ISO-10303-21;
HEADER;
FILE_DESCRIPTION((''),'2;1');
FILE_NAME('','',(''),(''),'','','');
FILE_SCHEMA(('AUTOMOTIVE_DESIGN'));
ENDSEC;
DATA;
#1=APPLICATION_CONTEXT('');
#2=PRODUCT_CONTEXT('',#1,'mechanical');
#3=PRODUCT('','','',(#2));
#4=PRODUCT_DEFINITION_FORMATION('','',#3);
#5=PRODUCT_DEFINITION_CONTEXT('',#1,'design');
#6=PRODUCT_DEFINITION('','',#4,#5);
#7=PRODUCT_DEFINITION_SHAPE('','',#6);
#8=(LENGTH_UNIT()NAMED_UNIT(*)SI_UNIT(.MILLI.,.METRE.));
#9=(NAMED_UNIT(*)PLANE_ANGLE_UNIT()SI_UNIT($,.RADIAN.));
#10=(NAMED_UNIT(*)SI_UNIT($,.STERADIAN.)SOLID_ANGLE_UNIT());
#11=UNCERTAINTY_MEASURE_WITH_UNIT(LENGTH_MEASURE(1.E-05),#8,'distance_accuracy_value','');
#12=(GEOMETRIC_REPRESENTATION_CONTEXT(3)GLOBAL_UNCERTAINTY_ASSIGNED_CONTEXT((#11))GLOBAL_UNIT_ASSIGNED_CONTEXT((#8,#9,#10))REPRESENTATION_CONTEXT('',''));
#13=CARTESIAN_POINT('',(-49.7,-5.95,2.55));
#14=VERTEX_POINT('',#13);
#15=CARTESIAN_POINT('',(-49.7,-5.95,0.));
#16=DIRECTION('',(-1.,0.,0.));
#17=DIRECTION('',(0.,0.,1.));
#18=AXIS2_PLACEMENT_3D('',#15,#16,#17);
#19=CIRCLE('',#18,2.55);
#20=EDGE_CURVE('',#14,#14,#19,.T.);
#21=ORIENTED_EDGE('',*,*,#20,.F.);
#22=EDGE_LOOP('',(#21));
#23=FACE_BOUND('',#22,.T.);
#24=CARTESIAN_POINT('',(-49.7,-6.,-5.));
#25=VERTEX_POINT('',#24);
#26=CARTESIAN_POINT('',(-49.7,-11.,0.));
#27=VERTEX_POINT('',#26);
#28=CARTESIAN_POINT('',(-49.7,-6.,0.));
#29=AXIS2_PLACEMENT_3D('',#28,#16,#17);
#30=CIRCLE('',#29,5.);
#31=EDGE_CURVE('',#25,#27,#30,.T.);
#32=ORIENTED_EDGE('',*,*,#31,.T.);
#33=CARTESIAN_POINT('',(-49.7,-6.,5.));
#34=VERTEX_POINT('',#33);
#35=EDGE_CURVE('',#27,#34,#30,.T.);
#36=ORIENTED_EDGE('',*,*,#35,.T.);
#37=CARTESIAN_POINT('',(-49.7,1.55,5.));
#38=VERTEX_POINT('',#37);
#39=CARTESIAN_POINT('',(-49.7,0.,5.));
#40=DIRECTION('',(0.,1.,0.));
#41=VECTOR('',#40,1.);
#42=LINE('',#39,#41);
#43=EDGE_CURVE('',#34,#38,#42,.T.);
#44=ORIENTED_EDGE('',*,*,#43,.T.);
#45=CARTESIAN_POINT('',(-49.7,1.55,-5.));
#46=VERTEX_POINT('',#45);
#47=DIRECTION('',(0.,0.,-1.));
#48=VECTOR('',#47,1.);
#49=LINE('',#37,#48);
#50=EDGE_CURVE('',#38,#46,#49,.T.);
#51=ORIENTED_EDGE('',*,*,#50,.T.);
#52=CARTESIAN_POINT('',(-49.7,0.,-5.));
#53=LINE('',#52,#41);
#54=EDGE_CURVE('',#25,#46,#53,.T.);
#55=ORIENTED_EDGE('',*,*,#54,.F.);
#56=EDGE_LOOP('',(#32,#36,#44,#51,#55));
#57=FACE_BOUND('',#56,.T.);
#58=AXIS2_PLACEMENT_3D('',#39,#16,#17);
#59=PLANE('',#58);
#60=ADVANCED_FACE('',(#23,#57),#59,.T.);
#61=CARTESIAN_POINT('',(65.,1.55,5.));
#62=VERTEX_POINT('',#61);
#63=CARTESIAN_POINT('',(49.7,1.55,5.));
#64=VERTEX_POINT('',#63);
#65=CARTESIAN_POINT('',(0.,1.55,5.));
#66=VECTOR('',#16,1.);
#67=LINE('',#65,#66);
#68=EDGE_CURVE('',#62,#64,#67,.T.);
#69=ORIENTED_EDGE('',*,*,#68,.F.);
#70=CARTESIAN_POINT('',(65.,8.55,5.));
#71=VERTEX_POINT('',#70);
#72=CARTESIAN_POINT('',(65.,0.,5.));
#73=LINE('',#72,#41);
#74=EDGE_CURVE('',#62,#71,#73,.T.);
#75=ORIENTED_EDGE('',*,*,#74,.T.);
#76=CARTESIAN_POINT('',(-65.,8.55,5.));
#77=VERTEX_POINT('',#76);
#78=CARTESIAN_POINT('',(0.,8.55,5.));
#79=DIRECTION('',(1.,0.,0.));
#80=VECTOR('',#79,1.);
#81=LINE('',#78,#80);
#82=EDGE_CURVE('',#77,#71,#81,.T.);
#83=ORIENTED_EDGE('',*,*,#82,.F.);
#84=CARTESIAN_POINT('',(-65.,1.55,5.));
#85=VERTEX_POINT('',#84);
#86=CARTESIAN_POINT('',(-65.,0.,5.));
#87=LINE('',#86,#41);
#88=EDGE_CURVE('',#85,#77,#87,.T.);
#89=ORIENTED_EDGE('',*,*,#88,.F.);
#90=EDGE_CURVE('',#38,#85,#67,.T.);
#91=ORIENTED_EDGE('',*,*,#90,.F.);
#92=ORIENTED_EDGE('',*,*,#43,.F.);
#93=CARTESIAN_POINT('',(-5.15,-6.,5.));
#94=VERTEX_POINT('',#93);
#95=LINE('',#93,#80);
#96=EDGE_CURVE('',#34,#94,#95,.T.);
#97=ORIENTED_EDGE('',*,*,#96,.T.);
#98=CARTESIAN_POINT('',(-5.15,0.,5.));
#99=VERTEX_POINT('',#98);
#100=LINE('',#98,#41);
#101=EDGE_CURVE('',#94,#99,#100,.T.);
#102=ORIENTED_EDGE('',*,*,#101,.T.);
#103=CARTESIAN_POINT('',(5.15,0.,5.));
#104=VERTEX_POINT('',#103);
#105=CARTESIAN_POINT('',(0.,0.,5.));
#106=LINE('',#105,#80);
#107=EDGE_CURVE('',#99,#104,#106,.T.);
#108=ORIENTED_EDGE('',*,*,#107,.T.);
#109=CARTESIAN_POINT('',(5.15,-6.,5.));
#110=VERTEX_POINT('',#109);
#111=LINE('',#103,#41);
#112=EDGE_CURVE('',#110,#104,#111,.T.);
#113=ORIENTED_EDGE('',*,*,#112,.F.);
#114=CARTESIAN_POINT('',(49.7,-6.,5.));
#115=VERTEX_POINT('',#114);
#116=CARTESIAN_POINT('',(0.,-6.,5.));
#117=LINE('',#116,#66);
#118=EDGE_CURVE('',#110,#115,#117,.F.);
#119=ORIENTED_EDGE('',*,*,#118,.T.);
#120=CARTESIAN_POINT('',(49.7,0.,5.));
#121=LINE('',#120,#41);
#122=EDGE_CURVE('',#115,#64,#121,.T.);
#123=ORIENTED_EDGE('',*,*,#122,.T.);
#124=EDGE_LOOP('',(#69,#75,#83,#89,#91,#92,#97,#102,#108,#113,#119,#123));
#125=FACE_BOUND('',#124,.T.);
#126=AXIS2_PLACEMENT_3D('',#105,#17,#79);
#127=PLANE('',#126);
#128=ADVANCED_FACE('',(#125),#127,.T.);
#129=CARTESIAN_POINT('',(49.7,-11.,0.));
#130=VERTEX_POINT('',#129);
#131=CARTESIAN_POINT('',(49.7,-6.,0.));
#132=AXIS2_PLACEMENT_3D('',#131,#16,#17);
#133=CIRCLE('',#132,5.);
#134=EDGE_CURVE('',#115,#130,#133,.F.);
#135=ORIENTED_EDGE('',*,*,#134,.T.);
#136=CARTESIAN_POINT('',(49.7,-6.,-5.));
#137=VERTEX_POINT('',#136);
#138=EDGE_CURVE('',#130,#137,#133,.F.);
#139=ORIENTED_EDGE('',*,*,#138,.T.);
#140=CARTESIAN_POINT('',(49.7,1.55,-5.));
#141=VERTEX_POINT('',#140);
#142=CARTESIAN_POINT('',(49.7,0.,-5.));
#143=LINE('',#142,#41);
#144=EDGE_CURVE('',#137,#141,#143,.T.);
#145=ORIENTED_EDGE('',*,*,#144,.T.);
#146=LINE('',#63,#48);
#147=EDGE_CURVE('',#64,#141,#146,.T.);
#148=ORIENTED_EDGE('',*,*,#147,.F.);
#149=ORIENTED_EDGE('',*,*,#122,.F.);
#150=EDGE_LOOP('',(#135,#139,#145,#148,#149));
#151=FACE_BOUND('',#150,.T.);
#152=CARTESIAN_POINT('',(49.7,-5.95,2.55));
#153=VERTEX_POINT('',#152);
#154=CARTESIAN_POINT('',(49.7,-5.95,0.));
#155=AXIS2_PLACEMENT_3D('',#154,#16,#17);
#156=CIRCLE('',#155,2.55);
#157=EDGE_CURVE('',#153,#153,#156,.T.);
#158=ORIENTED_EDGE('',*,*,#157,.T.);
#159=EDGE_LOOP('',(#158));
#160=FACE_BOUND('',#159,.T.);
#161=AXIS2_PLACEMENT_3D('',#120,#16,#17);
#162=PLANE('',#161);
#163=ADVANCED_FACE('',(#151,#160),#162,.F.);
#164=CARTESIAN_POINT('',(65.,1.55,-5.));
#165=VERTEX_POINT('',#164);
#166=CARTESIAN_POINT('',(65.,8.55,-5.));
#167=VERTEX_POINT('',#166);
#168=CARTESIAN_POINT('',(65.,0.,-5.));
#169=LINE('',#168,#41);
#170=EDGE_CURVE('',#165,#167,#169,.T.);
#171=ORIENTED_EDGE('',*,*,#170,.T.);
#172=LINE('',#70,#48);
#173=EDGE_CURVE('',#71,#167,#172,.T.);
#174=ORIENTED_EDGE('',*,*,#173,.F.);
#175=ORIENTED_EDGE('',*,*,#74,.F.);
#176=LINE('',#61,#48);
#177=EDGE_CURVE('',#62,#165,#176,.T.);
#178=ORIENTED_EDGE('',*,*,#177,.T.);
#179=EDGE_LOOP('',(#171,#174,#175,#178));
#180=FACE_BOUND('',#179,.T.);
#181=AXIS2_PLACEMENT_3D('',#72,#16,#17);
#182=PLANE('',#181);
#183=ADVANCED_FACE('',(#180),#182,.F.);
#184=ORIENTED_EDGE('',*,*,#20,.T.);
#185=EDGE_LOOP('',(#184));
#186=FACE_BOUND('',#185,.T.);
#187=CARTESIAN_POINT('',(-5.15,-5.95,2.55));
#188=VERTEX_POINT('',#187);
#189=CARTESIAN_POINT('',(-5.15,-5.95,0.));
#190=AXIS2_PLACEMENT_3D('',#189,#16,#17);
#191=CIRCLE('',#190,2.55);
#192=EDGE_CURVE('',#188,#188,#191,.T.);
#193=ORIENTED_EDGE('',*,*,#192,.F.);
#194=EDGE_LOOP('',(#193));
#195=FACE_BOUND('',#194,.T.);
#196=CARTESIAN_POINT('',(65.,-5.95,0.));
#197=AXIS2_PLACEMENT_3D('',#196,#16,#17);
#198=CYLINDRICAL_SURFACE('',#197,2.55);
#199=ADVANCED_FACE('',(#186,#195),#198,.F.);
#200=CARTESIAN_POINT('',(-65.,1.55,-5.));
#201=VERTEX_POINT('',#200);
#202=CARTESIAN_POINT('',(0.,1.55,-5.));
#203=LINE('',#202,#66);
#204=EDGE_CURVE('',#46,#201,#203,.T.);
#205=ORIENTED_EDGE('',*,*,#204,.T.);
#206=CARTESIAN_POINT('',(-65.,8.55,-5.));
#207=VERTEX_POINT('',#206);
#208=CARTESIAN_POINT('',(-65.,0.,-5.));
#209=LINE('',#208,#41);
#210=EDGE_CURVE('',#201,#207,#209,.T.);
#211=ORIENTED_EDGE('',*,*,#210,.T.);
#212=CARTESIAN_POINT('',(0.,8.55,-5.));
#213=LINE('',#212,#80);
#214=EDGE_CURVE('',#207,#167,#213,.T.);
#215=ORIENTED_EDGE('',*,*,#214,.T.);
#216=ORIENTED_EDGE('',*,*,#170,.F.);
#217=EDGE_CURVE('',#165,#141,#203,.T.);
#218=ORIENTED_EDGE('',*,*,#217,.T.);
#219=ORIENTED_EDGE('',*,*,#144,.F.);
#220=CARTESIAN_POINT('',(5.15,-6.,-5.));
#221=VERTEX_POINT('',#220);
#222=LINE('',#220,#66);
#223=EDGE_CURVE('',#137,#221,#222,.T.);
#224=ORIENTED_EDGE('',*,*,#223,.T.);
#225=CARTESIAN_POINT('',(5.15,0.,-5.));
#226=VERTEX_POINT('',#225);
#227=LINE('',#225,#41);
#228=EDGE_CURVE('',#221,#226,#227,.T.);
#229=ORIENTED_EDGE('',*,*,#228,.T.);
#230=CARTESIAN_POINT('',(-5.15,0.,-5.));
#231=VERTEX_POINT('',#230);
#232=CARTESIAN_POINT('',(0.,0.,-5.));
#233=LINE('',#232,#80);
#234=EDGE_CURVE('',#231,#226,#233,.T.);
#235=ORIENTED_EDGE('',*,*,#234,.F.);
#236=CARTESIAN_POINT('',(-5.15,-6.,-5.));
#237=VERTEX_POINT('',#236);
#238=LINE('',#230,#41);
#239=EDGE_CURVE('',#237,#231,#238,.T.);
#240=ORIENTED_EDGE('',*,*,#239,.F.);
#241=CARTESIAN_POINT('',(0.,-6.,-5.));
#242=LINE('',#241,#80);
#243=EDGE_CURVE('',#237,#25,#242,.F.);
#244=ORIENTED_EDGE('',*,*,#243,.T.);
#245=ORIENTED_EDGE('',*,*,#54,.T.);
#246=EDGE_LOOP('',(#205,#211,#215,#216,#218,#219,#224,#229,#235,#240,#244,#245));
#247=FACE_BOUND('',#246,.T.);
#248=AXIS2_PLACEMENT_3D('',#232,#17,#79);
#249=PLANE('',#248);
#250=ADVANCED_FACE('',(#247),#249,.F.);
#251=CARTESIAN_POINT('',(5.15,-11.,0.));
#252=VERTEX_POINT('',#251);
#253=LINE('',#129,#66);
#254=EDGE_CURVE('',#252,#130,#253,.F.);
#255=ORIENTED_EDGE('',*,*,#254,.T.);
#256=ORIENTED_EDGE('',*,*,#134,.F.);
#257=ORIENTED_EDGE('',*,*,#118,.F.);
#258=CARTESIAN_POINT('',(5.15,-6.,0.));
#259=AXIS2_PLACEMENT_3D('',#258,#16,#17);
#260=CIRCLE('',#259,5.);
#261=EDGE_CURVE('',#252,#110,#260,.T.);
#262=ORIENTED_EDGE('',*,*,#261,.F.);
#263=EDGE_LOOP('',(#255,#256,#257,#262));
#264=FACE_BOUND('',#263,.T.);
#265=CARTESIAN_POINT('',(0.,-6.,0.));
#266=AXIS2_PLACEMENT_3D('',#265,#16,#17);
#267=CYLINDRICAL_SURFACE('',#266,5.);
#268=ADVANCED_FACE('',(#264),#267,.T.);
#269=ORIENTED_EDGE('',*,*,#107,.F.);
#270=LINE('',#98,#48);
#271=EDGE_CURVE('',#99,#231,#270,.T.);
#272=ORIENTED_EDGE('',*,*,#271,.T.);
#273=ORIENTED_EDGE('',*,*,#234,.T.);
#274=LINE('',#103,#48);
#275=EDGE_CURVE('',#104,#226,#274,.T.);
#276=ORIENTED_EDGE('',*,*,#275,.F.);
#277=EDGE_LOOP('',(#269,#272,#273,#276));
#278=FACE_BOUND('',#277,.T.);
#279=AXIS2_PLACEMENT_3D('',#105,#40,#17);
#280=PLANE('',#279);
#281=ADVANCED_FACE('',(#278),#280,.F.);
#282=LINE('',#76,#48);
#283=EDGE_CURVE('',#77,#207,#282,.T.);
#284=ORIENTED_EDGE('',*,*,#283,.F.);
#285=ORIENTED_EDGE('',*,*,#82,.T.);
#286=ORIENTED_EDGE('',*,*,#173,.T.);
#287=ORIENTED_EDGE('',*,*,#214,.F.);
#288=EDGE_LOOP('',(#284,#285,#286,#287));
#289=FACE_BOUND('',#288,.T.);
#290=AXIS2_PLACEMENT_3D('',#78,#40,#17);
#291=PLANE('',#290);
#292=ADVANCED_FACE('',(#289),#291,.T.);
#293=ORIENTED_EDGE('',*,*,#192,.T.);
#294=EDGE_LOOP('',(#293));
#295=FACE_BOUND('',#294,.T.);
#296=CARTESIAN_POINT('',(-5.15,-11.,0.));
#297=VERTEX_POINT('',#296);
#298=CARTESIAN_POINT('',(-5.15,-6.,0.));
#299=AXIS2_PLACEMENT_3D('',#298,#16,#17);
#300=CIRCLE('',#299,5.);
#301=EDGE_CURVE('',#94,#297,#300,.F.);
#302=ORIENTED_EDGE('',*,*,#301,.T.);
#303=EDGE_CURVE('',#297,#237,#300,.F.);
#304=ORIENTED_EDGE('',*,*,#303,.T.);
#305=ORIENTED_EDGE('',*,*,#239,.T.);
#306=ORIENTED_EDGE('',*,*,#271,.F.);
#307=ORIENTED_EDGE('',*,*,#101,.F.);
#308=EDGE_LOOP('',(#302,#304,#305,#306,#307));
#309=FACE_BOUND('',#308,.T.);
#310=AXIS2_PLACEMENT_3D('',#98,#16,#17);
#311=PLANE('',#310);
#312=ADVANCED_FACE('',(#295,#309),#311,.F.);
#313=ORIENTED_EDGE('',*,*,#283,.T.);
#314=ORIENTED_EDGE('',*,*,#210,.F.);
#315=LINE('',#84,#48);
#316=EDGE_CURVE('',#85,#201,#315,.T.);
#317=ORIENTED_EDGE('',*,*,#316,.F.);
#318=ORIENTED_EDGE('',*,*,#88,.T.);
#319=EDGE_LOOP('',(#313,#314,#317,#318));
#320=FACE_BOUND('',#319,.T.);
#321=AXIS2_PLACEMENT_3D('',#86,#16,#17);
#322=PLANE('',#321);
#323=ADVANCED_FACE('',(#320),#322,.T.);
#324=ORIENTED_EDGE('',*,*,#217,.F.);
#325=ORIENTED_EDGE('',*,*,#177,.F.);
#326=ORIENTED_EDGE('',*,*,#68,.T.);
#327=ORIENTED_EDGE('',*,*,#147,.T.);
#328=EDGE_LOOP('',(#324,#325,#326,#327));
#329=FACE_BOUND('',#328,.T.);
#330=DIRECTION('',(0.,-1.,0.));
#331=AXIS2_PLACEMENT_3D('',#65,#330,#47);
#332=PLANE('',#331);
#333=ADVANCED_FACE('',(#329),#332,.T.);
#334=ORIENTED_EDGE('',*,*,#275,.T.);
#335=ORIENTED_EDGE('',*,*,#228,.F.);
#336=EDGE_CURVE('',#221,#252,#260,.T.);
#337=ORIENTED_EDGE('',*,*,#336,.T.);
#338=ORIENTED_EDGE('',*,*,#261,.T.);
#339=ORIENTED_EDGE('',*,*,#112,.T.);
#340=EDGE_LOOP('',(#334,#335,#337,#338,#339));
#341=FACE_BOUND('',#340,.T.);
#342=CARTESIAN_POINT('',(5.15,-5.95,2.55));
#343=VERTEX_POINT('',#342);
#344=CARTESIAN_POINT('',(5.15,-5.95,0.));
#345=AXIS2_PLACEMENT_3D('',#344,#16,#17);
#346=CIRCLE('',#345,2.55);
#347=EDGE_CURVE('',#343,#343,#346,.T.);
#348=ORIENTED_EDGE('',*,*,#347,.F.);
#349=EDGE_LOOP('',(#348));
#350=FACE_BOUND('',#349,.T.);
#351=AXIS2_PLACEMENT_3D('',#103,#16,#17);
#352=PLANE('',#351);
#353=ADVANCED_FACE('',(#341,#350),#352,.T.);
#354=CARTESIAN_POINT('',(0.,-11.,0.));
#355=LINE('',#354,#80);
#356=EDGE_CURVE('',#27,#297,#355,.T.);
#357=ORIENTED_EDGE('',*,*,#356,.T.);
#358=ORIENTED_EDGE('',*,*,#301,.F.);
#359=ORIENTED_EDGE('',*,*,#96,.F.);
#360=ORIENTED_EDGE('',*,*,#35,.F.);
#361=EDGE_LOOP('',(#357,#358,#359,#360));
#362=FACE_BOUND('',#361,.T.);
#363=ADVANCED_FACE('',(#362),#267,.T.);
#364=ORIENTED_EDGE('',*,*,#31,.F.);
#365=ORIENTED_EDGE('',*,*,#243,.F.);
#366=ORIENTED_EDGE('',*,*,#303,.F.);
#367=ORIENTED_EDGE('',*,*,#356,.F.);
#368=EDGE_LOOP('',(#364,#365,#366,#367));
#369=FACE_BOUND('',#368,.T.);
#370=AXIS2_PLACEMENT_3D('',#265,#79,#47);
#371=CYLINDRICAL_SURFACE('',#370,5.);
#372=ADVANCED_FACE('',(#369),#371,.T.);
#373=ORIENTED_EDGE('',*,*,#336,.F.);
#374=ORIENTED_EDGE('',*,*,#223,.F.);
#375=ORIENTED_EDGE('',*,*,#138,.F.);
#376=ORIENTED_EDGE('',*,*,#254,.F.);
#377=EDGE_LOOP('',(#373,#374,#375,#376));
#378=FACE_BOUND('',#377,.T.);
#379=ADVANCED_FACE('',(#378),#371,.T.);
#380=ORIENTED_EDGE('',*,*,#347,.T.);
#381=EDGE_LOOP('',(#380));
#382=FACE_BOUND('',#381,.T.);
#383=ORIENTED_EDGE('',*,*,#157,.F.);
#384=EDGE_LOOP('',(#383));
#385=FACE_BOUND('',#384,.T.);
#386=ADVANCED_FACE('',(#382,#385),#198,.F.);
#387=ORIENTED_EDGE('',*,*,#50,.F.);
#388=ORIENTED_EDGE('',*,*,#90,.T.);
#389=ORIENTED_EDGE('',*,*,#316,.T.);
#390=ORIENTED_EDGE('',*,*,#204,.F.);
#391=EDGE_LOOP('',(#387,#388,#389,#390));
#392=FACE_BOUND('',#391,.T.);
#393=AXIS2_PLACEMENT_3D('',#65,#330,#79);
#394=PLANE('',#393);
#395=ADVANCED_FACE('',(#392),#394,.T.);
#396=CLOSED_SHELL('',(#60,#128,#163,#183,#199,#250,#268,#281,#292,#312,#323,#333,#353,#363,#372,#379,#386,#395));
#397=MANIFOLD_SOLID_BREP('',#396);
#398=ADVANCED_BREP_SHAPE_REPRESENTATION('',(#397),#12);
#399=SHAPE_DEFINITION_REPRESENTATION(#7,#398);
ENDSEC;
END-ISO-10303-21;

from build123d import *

# Parameters (mm, degrees)
BOSS_EXTRUDE1_DEPTH = 5
SKETCH2_R           = 2.55
CUT_EXTRUDE1_DEPTH  = 131.560330882
FILLET1_R           = 5


with BuildPart() as part:
    # Sketch1 → Boss-Extrude1 (new, symmetric)
    with BuildSketch(Plane.XY):
        Polygon((-49.7, 1.55), (-49.7, -11), (-5.15, -11), (-5.15, 0), (5.15, 0), (5.15, -11), (49.7, -11), (49.7, 1.55), (56, 1.55), (65, 1.55), (65, 8.55), (-65, 8.55), (-65, 1.55), (-56, 1.55), align=None)
    extrude(amount=BOSS_EXTRUDE1_DEPTH, both=True)

    # Sketch2 → Cut-Extrude1 (cut, through all)
    with BuildSketch(Plane.ZY.offset(65)):
        with Locations((0, -5.95)):
            Circle(SKETCH2_R)
    extrude(amount=-CUT_EXTRUDE1_DEPTH, mode=Mode.SUBTRACT)

    # Fillet1
    fillet1_edges = [part.edges().sort_by_distance(p)[0] for p in [
        (-27.425, -11, 5),
        (27.425, -11, 5),
        (-27.425, -11, -5),
        (27.425, -11, -5),
    ]]
    fillet(fillet1_edges, radius=FILLET1_R - 0.0001)  # a hair under: the kernel refuses the full size


solid = part.part
